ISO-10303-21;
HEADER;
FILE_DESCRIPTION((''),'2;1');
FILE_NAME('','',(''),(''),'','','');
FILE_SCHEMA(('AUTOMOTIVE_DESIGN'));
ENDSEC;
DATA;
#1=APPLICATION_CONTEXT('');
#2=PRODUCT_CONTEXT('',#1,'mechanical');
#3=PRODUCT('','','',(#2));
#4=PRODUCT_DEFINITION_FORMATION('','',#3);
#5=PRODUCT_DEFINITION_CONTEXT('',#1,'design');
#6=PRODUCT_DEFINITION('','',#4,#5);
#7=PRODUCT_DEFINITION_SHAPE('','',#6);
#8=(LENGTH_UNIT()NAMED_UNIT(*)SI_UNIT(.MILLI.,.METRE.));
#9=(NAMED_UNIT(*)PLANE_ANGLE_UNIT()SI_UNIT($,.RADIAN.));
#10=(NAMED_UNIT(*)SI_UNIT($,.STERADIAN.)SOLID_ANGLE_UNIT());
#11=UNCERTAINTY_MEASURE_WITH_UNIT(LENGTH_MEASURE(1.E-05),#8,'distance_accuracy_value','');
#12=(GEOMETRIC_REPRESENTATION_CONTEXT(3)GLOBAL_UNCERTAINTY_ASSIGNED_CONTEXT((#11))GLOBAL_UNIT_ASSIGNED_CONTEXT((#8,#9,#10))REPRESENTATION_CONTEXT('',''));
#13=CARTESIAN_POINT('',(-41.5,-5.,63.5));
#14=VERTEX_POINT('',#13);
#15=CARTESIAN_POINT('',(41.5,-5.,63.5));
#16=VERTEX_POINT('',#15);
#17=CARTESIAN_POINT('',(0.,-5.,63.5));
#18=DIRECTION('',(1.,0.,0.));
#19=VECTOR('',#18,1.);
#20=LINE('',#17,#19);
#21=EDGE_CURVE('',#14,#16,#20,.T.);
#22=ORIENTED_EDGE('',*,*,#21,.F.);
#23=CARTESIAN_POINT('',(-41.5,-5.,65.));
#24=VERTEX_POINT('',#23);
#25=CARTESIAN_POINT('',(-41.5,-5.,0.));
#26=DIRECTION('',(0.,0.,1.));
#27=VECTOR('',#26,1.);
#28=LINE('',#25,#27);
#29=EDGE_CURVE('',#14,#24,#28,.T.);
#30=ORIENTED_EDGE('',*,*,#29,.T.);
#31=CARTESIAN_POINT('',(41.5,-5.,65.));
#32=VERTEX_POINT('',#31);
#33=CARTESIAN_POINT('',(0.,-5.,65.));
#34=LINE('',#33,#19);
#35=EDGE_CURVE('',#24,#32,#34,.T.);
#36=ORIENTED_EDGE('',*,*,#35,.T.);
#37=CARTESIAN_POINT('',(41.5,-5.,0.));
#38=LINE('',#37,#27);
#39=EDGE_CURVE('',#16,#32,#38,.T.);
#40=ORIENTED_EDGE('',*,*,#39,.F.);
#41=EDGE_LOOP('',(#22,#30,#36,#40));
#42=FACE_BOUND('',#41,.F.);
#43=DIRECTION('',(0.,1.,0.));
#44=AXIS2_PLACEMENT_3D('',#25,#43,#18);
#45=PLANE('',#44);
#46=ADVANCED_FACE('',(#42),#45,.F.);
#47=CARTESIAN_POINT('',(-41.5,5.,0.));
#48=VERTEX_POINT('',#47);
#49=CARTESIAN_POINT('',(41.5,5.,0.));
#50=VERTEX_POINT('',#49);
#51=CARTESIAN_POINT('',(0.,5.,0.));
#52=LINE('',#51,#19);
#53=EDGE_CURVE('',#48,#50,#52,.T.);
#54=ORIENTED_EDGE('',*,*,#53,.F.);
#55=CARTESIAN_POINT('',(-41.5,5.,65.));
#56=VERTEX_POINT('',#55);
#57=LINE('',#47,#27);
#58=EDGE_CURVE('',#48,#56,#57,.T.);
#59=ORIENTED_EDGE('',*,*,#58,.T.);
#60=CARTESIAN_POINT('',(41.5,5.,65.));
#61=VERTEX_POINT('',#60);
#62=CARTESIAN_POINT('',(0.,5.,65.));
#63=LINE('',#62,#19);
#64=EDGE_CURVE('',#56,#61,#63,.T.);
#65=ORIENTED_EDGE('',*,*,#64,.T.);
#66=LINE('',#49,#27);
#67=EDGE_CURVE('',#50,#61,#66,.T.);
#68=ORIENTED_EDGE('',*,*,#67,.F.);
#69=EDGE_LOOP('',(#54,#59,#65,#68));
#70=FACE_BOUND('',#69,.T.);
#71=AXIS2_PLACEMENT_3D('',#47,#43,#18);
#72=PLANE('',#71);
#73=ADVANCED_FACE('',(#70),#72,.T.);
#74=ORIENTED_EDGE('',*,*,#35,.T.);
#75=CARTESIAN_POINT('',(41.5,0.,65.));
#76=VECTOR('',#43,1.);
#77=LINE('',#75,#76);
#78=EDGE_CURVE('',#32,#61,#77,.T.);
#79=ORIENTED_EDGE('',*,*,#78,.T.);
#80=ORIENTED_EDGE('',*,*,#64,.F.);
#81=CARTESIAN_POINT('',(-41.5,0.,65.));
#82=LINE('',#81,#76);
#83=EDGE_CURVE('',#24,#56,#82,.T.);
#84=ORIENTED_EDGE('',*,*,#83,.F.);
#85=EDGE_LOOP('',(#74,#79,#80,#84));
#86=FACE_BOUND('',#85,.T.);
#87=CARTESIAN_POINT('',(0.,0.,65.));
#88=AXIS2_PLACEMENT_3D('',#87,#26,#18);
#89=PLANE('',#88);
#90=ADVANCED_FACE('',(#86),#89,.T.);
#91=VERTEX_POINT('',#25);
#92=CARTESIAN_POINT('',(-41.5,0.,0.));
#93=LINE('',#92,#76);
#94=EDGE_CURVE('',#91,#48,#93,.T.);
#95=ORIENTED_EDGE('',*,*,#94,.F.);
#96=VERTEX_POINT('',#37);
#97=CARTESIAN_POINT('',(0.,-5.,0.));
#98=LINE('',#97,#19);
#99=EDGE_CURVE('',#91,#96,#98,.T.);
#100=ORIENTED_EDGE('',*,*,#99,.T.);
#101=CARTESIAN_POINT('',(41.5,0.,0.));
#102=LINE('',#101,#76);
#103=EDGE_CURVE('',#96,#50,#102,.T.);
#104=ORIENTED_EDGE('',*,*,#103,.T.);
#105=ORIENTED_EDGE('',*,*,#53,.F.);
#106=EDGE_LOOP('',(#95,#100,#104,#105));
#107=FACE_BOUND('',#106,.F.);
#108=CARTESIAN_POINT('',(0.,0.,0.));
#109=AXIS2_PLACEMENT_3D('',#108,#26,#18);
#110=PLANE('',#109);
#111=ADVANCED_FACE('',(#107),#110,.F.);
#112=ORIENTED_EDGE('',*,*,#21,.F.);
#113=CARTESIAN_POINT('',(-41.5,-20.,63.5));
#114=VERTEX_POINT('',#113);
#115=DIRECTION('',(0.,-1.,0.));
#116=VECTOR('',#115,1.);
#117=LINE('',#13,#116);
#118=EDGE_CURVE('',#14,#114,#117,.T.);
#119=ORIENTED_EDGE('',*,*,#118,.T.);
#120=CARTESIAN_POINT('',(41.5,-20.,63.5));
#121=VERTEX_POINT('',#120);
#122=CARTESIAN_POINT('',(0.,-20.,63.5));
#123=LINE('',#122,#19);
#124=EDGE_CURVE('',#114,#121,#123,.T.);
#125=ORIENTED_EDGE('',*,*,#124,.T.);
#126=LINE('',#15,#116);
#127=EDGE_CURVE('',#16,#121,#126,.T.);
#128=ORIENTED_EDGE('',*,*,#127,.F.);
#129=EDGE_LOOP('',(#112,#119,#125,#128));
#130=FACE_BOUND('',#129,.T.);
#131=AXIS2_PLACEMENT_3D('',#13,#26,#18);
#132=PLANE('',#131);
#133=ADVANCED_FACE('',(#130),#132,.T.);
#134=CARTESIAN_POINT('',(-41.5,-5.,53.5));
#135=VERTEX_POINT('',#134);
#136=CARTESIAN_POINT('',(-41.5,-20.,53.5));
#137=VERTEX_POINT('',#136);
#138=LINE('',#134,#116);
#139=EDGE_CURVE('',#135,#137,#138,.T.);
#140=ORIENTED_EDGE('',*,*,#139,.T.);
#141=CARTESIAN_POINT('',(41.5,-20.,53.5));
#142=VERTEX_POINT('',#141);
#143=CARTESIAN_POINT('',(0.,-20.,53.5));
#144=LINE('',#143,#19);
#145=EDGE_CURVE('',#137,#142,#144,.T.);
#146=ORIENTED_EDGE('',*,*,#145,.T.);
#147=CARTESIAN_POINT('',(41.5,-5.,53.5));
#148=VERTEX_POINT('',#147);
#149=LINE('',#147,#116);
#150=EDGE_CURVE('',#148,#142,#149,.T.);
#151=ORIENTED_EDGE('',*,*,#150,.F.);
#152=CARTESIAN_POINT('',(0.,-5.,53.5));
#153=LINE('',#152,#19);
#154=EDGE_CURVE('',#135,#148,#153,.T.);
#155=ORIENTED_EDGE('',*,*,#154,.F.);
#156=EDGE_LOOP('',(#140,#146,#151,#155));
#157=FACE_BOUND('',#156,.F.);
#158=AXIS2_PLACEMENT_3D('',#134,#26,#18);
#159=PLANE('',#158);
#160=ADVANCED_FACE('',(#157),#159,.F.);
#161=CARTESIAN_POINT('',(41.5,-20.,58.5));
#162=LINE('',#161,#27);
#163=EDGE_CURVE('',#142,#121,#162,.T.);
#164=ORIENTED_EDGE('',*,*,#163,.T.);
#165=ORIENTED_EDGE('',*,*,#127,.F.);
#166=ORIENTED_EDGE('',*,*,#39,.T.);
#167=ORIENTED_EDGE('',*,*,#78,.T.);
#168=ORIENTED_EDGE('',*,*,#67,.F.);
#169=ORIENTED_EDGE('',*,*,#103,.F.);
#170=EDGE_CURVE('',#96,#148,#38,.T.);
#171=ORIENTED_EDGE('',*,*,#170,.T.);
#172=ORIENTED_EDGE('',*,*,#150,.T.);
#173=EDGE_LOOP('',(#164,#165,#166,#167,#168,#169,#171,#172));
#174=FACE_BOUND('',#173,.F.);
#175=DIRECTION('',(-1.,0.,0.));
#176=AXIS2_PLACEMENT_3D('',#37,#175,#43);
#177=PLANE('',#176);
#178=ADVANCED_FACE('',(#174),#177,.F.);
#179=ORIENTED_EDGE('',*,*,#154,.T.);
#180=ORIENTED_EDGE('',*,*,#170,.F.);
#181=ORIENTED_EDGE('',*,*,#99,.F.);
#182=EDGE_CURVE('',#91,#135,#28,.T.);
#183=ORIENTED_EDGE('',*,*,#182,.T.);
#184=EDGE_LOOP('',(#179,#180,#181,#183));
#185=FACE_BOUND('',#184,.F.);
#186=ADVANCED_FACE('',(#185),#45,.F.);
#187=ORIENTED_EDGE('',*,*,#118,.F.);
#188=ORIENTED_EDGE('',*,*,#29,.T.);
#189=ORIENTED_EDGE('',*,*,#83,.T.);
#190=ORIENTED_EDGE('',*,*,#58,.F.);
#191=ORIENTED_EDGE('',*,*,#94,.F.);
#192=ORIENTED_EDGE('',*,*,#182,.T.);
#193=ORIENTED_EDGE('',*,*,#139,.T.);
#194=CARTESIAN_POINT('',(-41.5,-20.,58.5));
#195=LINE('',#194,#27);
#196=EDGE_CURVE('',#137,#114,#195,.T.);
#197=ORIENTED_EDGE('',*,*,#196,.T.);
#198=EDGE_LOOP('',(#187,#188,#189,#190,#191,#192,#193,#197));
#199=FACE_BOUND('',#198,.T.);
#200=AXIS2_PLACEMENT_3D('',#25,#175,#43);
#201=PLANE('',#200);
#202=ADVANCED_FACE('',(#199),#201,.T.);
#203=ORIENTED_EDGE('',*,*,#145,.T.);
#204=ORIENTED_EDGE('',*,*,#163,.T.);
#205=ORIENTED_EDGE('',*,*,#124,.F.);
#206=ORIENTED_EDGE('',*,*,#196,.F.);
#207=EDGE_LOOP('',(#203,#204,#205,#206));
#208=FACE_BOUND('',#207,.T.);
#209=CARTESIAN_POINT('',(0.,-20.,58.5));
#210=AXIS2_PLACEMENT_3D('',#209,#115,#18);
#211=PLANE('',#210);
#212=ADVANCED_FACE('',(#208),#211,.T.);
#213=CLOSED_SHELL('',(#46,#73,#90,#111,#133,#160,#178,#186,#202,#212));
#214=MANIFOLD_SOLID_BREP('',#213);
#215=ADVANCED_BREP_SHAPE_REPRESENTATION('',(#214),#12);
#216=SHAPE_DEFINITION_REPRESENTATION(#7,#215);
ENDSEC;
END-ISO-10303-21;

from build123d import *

# Parameters (mm, degrees)
F0_W     = 83
F0_H     = 10
F1_DEPTH = 65
F2_W     = 83
F2_H     = 10
F3_DEPTH = 15


# Not quite as in the source:
# - a feature names something its author has since deleted; it is built from what else it names


with BuildPart() as f1:
    # F0 (on Top) → F1 (new body)
    with BuildSketch(Plane.XY):
        Rectangle(F0_W, F0_H)
    extrude(amount=F1_DEPTH)

    # F2 (on face) → F3 (join)
    with BuildSketch(Plane.XZ.offset(5)):
        with Locations((0, 58.5)):
            Rectangle(F2_W, F2_H)
    extrude(amount=F3_DEPTH)


solid = f1.part
